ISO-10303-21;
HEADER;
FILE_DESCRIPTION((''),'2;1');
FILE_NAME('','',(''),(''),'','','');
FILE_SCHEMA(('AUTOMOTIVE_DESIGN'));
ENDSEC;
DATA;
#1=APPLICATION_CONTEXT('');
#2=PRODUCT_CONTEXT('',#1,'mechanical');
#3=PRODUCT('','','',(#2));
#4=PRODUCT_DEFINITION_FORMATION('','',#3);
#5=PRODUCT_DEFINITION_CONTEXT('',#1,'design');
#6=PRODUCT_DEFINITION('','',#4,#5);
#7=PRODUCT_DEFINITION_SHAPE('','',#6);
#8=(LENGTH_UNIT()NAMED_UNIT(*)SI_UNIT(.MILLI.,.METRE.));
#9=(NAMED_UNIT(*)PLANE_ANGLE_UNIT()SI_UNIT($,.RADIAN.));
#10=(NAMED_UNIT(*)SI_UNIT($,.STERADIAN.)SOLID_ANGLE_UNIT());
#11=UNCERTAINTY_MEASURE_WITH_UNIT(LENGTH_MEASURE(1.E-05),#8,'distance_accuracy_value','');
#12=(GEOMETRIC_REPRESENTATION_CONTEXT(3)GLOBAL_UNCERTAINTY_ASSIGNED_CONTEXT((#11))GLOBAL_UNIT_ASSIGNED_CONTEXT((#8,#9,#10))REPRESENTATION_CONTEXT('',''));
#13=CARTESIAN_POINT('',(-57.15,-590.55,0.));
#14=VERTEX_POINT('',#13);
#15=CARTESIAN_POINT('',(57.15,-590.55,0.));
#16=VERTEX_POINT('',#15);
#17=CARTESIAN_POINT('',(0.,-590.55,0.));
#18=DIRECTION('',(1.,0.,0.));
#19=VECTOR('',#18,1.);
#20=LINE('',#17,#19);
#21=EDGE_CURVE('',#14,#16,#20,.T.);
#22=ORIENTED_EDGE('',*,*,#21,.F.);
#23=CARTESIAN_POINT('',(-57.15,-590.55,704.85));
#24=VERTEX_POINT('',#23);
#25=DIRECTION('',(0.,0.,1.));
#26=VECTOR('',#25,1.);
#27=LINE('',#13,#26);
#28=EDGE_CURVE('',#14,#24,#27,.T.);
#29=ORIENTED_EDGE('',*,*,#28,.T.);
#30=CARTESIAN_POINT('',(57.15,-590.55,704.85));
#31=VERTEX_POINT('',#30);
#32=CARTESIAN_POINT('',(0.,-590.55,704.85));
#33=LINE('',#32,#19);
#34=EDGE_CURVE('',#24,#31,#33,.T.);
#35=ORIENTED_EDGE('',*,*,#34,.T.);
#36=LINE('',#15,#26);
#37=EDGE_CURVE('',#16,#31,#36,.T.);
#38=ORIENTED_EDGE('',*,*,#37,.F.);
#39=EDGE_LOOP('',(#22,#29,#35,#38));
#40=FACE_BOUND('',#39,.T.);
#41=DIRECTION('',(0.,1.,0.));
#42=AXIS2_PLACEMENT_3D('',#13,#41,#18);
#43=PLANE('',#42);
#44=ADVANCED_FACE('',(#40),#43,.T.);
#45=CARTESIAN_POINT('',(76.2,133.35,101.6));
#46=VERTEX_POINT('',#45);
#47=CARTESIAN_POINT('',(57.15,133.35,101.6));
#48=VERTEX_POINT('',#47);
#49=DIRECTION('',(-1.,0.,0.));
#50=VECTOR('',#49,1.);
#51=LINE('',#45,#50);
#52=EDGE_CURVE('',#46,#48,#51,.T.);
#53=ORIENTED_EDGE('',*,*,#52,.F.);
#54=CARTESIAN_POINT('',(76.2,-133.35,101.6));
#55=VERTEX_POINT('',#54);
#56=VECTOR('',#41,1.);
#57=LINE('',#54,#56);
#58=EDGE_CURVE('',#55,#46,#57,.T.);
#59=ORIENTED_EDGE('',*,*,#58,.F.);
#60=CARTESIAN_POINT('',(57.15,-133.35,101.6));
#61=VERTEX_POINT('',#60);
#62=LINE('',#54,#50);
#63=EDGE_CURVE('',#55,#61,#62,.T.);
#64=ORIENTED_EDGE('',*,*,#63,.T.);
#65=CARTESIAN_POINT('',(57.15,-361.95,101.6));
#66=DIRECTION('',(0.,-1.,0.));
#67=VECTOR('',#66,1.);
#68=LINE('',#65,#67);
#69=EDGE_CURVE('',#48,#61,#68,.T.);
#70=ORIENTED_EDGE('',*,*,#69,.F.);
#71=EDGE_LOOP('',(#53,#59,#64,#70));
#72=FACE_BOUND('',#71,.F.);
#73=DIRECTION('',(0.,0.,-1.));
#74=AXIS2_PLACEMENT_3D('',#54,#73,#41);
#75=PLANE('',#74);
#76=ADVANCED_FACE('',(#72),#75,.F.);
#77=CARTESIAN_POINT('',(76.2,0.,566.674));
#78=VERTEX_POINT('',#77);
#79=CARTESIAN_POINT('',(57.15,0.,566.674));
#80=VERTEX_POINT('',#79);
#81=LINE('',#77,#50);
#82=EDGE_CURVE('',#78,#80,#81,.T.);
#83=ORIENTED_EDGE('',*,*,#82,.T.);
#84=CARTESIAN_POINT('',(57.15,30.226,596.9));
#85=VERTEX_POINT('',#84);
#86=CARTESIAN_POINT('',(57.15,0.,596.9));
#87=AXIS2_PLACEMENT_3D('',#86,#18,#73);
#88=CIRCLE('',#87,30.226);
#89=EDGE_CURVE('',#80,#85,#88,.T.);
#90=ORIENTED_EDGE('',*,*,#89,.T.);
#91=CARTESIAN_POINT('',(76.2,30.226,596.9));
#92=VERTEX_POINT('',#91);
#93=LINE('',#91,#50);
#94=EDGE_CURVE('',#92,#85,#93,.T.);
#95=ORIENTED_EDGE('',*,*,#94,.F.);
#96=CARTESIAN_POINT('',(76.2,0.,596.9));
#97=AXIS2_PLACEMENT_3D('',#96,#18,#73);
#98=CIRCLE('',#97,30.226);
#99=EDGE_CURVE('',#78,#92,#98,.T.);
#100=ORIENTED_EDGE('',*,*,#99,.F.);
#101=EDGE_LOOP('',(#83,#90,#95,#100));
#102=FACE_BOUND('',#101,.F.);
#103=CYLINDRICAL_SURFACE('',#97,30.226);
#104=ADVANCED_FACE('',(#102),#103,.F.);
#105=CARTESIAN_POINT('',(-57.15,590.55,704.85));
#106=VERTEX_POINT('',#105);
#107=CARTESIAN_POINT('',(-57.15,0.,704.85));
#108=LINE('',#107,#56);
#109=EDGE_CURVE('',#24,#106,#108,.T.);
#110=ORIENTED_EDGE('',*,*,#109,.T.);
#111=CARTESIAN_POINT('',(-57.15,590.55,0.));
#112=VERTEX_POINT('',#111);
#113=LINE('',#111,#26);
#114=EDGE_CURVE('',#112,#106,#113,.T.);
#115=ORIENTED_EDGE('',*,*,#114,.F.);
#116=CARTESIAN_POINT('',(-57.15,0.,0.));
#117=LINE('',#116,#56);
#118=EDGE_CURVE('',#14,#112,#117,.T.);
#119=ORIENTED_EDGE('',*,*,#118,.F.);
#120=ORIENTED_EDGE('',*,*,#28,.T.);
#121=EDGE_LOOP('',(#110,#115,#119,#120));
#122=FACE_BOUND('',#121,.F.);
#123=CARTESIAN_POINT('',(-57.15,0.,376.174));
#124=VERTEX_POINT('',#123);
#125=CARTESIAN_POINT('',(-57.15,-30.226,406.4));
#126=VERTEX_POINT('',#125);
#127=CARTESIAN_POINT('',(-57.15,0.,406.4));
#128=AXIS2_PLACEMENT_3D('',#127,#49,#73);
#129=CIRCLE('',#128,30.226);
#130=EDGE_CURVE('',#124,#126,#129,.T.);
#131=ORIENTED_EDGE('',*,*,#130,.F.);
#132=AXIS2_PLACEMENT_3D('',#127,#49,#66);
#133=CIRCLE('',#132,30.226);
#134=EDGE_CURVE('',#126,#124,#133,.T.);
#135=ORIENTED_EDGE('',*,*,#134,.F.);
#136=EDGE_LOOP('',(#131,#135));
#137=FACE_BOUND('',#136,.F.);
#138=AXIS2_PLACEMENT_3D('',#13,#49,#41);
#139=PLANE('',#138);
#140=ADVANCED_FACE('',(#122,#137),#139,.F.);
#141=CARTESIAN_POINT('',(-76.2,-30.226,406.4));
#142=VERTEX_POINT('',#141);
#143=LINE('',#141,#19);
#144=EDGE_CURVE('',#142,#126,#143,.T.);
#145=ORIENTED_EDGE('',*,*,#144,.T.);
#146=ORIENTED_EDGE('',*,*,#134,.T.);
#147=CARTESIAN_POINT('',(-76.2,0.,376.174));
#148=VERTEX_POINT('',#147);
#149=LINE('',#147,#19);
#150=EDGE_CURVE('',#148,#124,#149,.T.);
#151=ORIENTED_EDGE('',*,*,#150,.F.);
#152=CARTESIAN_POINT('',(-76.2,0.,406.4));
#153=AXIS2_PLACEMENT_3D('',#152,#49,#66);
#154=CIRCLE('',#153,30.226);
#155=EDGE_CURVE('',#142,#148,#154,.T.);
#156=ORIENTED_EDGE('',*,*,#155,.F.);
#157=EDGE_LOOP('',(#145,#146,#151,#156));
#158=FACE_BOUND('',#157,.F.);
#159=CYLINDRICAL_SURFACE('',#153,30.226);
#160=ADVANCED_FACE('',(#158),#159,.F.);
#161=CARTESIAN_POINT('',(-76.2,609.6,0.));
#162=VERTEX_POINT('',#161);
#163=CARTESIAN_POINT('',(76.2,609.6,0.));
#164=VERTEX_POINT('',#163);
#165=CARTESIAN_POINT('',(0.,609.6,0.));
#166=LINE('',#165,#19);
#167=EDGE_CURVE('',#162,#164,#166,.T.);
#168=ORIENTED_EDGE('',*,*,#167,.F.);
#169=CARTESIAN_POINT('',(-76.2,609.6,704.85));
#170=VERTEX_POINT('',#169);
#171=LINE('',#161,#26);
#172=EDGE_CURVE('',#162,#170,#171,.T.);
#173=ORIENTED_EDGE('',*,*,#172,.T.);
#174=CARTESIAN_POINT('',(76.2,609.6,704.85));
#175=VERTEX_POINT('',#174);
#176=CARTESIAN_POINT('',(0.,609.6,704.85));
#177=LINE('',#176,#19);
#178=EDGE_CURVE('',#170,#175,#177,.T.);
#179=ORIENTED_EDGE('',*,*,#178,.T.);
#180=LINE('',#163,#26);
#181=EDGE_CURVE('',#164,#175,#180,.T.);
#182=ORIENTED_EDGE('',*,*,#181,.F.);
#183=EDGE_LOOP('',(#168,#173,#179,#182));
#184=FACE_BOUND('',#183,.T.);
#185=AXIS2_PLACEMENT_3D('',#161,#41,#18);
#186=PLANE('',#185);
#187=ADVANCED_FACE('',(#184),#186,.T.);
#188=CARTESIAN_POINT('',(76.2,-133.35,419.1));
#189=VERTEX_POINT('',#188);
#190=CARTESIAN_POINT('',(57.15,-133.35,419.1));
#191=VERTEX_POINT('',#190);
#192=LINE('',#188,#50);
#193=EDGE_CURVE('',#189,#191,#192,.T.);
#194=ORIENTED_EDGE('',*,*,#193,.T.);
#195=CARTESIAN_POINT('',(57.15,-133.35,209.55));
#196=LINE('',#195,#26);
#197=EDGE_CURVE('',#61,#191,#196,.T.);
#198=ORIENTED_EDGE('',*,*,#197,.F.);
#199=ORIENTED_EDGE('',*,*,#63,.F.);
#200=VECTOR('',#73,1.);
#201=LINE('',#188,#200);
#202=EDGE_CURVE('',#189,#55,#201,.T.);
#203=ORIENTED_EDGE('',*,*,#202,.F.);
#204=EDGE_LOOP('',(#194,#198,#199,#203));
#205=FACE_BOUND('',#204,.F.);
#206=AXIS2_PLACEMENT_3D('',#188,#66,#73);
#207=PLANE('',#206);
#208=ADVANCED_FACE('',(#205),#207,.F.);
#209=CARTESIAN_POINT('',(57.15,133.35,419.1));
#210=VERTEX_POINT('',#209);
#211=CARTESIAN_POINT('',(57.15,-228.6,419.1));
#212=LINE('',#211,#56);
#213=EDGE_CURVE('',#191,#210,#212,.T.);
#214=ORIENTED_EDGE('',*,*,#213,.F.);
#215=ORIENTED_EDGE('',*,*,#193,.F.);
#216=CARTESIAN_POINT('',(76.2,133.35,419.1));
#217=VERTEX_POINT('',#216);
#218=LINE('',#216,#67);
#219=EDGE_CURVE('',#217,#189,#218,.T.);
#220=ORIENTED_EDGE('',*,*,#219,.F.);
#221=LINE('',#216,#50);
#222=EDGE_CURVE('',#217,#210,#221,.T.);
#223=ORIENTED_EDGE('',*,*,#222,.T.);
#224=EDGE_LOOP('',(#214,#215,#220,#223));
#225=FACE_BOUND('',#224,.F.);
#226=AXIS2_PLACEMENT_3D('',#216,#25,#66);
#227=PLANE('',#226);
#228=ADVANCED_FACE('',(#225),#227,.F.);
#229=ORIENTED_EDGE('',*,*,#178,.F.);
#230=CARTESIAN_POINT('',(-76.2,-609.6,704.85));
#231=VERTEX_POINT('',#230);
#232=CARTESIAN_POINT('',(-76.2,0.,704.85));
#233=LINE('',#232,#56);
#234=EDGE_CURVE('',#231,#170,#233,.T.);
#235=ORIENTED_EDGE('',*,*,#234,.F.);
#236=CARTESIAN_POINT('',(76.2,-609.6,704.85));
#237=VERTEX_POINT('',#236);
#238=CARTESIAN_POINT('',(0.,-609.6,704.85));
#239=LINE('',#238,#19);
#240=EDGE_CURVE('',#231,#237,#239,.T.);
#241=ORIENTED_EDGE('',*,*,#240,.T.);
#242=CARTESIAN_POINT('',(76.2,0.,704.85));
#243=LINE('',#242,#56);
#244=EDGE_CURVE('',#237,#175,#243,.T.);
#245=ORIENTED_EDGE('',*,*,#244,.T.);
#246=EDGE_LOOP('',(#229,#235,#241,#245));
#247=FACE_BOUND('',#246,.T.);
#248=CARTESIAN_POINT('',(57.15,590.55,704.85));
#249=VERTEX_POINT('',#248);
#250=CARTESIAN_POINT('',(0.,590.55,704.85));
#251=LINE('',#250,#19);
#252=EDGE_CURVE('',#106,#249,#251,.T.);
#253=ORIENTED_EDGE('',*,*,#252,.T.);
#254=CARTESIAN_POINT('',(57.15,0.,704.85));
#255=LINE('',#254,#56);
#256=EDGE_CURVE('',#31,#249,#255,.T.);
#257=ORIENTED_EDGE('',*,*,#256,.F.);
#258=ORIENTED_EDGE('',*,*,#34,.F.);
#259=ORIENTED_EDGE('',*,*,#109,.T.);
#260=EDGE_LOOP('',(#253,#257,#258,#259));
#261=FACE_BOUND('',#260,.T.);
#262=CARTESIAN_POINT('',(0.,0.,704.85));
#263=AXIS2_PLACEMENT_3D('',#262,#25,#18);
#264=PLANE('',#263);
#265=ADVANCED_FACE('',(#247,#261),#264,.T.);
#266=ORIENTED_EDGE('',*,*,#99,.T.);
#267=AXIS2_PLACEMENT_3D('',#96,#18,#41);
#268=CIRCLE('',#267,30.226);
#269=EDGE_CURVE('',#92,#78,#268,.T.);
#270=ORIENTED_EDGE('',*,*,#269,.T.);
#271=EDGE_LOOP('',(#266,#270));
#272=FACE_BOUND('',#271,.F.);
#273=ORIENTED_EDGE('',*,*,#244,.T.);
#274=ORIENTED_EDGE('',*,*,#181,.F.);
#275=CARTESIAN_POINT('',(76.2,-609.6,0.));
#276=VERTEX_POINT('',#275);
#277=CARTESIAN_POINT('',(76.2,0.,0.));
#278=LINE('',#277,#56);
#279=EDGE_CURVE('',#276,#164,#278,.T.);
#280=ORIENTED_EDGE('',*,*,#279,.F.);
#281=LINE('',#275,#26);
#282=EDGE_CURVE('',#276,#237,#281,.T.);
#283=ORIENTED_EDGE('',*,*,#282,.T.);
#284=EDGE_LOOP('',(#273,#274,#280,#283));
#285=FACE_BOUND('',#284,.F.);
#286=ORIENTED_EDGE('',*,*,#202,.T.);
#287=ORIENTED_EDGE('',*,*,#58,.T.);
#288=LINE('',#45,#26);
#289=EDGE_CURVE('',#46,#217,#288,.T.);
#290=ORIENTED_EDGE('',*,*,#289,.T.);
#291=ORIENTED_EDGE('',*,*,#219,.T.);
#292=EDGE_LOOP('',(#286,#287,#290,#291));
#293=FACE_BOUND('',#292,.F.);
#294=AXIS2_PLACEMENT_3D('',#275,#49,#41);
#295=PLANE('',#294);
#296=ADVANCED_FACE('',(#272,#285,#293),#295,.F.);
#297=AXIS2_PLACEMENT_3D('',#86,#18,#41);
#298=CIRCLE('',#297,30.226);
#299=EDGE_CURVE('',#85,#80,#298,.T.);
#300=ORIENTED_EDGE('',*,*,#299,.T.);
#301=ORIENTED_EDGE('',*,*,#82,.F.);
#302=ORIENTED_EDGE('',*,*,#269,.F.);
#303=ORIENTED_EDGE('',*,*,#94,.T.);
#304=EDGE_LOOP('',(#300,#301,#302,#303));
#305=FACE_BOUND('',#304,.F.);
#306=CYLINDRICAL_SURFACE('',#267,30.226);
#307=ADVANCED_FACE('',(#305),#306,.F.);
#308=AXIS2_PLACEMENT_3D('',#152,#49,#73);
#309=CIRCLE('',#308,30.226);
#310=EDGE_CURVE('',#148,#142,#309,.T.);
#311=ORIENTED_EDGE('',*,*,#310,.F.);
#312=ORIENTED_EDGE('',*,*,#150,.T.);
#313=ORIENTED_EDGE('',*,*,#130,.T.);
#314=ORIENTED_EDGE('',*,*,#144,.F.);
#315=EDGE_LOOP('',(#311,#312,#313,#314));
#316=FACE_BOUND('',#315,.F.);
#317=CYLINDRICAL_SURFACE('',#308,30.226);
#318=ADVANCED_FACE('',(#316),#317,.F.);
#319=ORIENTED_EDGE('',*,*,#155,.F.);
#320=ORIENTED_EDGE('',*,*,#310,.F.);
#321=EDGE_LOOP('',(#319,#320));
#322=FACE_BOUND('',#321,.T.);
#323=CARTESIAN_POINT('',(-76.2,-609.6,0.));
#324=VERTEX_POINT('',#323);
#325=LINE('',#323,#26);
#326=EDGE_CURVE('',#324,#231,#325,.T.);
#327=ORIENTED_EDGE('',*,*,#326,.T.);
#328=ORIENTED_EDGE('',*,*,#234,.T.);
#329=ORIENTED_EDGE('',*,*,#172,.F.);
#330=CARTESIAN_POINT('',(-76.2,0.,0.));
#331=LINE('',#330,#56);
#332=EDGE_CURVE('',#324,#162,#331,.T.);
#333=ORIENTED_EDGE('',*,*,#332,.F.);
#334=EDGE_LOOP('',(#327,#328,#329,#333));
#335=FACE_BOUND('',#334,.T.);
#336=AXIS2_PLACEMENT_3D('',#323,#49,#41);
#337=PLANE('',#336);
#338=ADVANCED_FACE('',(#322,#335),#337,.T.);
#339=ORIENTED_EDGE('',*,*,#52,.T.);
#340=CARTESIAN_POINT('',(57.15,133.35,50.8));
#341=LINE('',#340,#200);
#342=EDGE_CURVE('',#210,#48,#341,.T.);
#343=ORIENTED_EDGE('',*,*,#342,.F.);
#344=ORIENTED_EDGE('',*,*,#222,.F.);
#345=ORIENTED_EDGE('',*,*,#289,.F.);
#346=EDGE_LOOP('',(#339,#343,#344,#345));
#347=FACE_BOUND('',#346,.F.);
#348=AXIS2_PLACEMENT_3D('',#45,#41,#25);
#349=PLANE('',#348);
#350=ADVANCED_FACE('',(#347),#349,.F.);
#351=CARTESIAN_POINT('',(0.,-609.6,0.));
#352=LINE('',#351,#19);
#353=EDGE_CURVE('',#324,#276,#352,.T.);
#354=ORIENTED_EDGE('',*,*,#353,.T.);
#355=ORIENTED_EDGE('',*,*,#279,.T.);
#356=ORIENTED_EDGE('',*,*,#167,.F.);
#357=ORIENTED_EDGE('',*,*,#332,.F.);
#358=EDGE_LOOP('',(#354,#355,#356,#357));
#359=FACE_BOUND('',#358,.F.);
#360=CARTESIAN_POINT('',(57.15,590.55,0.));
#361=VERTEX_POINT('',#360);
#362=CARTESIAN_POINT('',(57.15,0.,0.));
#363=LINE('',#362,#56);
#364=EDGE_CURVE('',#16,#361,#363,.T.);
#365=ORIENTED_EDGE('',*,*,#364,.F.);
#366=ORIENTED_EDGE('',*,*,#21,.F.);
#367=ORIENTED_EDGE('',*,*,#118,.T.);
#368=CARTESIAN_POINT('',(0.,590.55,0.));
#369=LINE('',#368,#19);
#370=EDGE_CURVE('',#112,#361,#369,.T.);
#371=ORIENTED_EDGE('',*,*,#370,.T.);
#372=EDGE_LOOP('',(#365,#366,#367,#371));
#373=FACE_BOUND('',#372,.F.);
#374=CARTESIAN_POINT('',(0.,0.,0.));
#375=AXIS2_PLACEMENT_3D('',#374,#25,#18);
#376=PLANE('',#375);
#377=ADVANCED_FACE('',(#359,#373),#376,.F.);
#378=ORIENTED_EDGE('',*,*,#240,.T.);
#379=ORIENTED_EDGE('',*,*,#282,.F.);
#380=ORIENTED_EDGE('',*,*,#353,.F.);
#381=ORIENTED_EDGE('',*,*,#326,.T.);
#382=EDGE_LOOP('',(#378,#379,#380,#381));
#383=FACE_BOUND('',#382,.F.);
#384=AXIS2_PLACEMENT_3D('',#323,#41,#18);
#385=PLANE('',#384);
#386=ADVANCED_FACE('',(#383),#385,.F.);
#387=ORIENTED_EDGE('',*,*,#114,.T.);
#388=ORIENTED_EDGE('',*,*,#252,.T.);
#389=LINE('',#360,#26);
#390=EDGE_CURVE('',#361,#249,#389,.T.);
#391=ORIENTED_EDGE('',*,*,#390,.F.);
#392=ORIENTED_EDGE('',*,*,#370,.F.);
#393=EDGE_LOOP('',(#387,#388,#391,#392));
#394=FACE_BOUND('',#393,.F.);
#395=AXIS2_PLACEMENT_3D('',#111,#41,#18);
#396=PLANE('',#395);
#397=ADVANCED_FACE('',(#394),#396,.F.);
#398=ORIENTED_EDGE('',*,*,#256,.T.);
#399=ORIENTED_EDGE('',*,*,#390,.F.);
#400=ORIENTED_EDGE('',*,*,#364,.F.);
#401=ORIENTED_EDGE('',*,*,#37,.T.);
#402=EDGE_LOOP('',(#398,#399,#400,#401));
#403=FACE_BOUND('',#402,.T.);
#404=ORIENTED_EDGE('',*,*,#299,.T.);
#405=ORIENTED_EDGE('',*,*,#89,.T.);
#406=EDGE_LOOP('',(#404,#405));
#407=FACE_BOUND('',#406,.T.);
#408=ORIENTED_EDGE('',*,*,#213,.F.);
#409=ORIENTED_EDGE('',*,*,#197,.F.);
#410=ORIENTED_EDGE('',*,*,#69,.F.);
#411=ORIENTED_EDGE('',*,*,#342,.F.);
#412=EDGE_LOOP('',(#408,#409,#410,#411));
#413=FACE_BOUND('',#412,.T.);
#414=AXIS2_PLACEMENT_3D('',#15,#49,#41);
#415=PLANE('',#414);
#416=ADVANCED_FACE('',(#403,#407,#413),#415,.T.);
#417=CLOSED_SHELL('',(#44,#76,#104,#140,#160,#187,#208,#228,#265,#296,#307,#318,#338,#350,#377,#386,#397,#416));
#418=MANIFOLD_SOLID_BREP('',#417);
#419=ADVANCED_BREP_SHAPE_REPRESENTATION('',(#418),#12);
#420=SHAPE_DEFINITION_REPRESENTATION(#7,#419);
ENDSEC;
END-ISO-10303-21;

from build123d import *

# Parameters (mm, degrees)
F0_W     = 152.4
F0_H     = 1219.2
F0_W_2   = 114.3
F0_H_2   = 1181.1
F1_DEPTH = 704.85
F3_DEPTH = 25.4
F5_DEPTH = 25.4


# Not quite as in the source:
# - a feature names something its author has since deleted; it is built from what else it names


with BuildPart() as f1:
    # F0 (on Top) → F1 (new body)
    with BuildSketch(Plane.XY):
        Rectangle(F0_W, F0_H)
        Rectangle(F0_W_2, F0_H_2, mode=Mode.SUBTRACT)
    extrude(amount=F1_DEPTH)

    # F2 (on face) → F3 (cut)
    with BuildSketch(Plane.YZ.offset(76.2)):
        with BuildLine():
            ThreePointArc((30.226, 596.9), (-21.3730095681, 618.2730095681), (0, 566.674))
            ThreePointArc((0, 566.674), (21.3730095681, 575.5269904319), (30.226, 596.9))
        make_face()
        Polygon((-133.35, 101.6), (0, 101.6), (133.35, 101.6), (133.35, 419.1), (0, 419.1), (-133.35, 419.1), align=None)
    extrude(amount=-F3_DEPTH, mode=Mode.SUBTRACT)

    # F4 (on face) → F5 (cut)
    with BuildSketch(Plane(origin=(-76.2, 0, 0), x_dir=(0, -1, 0), z_dir=(-1, 0, 0))):
        with BuildLine():
            ThreePointArc((30.226, 406.4), (-21.3730095681, 427.7730095681), (0, 376.174))
            ThreePointArc((0, 376.174), (21.3730095681, 385.0269904319), (30.226, 406.4))
        make_face()
    extrude(amount=-F5_DEPTH, mode=Mode.SUBTRACT)


solid = f1.part
